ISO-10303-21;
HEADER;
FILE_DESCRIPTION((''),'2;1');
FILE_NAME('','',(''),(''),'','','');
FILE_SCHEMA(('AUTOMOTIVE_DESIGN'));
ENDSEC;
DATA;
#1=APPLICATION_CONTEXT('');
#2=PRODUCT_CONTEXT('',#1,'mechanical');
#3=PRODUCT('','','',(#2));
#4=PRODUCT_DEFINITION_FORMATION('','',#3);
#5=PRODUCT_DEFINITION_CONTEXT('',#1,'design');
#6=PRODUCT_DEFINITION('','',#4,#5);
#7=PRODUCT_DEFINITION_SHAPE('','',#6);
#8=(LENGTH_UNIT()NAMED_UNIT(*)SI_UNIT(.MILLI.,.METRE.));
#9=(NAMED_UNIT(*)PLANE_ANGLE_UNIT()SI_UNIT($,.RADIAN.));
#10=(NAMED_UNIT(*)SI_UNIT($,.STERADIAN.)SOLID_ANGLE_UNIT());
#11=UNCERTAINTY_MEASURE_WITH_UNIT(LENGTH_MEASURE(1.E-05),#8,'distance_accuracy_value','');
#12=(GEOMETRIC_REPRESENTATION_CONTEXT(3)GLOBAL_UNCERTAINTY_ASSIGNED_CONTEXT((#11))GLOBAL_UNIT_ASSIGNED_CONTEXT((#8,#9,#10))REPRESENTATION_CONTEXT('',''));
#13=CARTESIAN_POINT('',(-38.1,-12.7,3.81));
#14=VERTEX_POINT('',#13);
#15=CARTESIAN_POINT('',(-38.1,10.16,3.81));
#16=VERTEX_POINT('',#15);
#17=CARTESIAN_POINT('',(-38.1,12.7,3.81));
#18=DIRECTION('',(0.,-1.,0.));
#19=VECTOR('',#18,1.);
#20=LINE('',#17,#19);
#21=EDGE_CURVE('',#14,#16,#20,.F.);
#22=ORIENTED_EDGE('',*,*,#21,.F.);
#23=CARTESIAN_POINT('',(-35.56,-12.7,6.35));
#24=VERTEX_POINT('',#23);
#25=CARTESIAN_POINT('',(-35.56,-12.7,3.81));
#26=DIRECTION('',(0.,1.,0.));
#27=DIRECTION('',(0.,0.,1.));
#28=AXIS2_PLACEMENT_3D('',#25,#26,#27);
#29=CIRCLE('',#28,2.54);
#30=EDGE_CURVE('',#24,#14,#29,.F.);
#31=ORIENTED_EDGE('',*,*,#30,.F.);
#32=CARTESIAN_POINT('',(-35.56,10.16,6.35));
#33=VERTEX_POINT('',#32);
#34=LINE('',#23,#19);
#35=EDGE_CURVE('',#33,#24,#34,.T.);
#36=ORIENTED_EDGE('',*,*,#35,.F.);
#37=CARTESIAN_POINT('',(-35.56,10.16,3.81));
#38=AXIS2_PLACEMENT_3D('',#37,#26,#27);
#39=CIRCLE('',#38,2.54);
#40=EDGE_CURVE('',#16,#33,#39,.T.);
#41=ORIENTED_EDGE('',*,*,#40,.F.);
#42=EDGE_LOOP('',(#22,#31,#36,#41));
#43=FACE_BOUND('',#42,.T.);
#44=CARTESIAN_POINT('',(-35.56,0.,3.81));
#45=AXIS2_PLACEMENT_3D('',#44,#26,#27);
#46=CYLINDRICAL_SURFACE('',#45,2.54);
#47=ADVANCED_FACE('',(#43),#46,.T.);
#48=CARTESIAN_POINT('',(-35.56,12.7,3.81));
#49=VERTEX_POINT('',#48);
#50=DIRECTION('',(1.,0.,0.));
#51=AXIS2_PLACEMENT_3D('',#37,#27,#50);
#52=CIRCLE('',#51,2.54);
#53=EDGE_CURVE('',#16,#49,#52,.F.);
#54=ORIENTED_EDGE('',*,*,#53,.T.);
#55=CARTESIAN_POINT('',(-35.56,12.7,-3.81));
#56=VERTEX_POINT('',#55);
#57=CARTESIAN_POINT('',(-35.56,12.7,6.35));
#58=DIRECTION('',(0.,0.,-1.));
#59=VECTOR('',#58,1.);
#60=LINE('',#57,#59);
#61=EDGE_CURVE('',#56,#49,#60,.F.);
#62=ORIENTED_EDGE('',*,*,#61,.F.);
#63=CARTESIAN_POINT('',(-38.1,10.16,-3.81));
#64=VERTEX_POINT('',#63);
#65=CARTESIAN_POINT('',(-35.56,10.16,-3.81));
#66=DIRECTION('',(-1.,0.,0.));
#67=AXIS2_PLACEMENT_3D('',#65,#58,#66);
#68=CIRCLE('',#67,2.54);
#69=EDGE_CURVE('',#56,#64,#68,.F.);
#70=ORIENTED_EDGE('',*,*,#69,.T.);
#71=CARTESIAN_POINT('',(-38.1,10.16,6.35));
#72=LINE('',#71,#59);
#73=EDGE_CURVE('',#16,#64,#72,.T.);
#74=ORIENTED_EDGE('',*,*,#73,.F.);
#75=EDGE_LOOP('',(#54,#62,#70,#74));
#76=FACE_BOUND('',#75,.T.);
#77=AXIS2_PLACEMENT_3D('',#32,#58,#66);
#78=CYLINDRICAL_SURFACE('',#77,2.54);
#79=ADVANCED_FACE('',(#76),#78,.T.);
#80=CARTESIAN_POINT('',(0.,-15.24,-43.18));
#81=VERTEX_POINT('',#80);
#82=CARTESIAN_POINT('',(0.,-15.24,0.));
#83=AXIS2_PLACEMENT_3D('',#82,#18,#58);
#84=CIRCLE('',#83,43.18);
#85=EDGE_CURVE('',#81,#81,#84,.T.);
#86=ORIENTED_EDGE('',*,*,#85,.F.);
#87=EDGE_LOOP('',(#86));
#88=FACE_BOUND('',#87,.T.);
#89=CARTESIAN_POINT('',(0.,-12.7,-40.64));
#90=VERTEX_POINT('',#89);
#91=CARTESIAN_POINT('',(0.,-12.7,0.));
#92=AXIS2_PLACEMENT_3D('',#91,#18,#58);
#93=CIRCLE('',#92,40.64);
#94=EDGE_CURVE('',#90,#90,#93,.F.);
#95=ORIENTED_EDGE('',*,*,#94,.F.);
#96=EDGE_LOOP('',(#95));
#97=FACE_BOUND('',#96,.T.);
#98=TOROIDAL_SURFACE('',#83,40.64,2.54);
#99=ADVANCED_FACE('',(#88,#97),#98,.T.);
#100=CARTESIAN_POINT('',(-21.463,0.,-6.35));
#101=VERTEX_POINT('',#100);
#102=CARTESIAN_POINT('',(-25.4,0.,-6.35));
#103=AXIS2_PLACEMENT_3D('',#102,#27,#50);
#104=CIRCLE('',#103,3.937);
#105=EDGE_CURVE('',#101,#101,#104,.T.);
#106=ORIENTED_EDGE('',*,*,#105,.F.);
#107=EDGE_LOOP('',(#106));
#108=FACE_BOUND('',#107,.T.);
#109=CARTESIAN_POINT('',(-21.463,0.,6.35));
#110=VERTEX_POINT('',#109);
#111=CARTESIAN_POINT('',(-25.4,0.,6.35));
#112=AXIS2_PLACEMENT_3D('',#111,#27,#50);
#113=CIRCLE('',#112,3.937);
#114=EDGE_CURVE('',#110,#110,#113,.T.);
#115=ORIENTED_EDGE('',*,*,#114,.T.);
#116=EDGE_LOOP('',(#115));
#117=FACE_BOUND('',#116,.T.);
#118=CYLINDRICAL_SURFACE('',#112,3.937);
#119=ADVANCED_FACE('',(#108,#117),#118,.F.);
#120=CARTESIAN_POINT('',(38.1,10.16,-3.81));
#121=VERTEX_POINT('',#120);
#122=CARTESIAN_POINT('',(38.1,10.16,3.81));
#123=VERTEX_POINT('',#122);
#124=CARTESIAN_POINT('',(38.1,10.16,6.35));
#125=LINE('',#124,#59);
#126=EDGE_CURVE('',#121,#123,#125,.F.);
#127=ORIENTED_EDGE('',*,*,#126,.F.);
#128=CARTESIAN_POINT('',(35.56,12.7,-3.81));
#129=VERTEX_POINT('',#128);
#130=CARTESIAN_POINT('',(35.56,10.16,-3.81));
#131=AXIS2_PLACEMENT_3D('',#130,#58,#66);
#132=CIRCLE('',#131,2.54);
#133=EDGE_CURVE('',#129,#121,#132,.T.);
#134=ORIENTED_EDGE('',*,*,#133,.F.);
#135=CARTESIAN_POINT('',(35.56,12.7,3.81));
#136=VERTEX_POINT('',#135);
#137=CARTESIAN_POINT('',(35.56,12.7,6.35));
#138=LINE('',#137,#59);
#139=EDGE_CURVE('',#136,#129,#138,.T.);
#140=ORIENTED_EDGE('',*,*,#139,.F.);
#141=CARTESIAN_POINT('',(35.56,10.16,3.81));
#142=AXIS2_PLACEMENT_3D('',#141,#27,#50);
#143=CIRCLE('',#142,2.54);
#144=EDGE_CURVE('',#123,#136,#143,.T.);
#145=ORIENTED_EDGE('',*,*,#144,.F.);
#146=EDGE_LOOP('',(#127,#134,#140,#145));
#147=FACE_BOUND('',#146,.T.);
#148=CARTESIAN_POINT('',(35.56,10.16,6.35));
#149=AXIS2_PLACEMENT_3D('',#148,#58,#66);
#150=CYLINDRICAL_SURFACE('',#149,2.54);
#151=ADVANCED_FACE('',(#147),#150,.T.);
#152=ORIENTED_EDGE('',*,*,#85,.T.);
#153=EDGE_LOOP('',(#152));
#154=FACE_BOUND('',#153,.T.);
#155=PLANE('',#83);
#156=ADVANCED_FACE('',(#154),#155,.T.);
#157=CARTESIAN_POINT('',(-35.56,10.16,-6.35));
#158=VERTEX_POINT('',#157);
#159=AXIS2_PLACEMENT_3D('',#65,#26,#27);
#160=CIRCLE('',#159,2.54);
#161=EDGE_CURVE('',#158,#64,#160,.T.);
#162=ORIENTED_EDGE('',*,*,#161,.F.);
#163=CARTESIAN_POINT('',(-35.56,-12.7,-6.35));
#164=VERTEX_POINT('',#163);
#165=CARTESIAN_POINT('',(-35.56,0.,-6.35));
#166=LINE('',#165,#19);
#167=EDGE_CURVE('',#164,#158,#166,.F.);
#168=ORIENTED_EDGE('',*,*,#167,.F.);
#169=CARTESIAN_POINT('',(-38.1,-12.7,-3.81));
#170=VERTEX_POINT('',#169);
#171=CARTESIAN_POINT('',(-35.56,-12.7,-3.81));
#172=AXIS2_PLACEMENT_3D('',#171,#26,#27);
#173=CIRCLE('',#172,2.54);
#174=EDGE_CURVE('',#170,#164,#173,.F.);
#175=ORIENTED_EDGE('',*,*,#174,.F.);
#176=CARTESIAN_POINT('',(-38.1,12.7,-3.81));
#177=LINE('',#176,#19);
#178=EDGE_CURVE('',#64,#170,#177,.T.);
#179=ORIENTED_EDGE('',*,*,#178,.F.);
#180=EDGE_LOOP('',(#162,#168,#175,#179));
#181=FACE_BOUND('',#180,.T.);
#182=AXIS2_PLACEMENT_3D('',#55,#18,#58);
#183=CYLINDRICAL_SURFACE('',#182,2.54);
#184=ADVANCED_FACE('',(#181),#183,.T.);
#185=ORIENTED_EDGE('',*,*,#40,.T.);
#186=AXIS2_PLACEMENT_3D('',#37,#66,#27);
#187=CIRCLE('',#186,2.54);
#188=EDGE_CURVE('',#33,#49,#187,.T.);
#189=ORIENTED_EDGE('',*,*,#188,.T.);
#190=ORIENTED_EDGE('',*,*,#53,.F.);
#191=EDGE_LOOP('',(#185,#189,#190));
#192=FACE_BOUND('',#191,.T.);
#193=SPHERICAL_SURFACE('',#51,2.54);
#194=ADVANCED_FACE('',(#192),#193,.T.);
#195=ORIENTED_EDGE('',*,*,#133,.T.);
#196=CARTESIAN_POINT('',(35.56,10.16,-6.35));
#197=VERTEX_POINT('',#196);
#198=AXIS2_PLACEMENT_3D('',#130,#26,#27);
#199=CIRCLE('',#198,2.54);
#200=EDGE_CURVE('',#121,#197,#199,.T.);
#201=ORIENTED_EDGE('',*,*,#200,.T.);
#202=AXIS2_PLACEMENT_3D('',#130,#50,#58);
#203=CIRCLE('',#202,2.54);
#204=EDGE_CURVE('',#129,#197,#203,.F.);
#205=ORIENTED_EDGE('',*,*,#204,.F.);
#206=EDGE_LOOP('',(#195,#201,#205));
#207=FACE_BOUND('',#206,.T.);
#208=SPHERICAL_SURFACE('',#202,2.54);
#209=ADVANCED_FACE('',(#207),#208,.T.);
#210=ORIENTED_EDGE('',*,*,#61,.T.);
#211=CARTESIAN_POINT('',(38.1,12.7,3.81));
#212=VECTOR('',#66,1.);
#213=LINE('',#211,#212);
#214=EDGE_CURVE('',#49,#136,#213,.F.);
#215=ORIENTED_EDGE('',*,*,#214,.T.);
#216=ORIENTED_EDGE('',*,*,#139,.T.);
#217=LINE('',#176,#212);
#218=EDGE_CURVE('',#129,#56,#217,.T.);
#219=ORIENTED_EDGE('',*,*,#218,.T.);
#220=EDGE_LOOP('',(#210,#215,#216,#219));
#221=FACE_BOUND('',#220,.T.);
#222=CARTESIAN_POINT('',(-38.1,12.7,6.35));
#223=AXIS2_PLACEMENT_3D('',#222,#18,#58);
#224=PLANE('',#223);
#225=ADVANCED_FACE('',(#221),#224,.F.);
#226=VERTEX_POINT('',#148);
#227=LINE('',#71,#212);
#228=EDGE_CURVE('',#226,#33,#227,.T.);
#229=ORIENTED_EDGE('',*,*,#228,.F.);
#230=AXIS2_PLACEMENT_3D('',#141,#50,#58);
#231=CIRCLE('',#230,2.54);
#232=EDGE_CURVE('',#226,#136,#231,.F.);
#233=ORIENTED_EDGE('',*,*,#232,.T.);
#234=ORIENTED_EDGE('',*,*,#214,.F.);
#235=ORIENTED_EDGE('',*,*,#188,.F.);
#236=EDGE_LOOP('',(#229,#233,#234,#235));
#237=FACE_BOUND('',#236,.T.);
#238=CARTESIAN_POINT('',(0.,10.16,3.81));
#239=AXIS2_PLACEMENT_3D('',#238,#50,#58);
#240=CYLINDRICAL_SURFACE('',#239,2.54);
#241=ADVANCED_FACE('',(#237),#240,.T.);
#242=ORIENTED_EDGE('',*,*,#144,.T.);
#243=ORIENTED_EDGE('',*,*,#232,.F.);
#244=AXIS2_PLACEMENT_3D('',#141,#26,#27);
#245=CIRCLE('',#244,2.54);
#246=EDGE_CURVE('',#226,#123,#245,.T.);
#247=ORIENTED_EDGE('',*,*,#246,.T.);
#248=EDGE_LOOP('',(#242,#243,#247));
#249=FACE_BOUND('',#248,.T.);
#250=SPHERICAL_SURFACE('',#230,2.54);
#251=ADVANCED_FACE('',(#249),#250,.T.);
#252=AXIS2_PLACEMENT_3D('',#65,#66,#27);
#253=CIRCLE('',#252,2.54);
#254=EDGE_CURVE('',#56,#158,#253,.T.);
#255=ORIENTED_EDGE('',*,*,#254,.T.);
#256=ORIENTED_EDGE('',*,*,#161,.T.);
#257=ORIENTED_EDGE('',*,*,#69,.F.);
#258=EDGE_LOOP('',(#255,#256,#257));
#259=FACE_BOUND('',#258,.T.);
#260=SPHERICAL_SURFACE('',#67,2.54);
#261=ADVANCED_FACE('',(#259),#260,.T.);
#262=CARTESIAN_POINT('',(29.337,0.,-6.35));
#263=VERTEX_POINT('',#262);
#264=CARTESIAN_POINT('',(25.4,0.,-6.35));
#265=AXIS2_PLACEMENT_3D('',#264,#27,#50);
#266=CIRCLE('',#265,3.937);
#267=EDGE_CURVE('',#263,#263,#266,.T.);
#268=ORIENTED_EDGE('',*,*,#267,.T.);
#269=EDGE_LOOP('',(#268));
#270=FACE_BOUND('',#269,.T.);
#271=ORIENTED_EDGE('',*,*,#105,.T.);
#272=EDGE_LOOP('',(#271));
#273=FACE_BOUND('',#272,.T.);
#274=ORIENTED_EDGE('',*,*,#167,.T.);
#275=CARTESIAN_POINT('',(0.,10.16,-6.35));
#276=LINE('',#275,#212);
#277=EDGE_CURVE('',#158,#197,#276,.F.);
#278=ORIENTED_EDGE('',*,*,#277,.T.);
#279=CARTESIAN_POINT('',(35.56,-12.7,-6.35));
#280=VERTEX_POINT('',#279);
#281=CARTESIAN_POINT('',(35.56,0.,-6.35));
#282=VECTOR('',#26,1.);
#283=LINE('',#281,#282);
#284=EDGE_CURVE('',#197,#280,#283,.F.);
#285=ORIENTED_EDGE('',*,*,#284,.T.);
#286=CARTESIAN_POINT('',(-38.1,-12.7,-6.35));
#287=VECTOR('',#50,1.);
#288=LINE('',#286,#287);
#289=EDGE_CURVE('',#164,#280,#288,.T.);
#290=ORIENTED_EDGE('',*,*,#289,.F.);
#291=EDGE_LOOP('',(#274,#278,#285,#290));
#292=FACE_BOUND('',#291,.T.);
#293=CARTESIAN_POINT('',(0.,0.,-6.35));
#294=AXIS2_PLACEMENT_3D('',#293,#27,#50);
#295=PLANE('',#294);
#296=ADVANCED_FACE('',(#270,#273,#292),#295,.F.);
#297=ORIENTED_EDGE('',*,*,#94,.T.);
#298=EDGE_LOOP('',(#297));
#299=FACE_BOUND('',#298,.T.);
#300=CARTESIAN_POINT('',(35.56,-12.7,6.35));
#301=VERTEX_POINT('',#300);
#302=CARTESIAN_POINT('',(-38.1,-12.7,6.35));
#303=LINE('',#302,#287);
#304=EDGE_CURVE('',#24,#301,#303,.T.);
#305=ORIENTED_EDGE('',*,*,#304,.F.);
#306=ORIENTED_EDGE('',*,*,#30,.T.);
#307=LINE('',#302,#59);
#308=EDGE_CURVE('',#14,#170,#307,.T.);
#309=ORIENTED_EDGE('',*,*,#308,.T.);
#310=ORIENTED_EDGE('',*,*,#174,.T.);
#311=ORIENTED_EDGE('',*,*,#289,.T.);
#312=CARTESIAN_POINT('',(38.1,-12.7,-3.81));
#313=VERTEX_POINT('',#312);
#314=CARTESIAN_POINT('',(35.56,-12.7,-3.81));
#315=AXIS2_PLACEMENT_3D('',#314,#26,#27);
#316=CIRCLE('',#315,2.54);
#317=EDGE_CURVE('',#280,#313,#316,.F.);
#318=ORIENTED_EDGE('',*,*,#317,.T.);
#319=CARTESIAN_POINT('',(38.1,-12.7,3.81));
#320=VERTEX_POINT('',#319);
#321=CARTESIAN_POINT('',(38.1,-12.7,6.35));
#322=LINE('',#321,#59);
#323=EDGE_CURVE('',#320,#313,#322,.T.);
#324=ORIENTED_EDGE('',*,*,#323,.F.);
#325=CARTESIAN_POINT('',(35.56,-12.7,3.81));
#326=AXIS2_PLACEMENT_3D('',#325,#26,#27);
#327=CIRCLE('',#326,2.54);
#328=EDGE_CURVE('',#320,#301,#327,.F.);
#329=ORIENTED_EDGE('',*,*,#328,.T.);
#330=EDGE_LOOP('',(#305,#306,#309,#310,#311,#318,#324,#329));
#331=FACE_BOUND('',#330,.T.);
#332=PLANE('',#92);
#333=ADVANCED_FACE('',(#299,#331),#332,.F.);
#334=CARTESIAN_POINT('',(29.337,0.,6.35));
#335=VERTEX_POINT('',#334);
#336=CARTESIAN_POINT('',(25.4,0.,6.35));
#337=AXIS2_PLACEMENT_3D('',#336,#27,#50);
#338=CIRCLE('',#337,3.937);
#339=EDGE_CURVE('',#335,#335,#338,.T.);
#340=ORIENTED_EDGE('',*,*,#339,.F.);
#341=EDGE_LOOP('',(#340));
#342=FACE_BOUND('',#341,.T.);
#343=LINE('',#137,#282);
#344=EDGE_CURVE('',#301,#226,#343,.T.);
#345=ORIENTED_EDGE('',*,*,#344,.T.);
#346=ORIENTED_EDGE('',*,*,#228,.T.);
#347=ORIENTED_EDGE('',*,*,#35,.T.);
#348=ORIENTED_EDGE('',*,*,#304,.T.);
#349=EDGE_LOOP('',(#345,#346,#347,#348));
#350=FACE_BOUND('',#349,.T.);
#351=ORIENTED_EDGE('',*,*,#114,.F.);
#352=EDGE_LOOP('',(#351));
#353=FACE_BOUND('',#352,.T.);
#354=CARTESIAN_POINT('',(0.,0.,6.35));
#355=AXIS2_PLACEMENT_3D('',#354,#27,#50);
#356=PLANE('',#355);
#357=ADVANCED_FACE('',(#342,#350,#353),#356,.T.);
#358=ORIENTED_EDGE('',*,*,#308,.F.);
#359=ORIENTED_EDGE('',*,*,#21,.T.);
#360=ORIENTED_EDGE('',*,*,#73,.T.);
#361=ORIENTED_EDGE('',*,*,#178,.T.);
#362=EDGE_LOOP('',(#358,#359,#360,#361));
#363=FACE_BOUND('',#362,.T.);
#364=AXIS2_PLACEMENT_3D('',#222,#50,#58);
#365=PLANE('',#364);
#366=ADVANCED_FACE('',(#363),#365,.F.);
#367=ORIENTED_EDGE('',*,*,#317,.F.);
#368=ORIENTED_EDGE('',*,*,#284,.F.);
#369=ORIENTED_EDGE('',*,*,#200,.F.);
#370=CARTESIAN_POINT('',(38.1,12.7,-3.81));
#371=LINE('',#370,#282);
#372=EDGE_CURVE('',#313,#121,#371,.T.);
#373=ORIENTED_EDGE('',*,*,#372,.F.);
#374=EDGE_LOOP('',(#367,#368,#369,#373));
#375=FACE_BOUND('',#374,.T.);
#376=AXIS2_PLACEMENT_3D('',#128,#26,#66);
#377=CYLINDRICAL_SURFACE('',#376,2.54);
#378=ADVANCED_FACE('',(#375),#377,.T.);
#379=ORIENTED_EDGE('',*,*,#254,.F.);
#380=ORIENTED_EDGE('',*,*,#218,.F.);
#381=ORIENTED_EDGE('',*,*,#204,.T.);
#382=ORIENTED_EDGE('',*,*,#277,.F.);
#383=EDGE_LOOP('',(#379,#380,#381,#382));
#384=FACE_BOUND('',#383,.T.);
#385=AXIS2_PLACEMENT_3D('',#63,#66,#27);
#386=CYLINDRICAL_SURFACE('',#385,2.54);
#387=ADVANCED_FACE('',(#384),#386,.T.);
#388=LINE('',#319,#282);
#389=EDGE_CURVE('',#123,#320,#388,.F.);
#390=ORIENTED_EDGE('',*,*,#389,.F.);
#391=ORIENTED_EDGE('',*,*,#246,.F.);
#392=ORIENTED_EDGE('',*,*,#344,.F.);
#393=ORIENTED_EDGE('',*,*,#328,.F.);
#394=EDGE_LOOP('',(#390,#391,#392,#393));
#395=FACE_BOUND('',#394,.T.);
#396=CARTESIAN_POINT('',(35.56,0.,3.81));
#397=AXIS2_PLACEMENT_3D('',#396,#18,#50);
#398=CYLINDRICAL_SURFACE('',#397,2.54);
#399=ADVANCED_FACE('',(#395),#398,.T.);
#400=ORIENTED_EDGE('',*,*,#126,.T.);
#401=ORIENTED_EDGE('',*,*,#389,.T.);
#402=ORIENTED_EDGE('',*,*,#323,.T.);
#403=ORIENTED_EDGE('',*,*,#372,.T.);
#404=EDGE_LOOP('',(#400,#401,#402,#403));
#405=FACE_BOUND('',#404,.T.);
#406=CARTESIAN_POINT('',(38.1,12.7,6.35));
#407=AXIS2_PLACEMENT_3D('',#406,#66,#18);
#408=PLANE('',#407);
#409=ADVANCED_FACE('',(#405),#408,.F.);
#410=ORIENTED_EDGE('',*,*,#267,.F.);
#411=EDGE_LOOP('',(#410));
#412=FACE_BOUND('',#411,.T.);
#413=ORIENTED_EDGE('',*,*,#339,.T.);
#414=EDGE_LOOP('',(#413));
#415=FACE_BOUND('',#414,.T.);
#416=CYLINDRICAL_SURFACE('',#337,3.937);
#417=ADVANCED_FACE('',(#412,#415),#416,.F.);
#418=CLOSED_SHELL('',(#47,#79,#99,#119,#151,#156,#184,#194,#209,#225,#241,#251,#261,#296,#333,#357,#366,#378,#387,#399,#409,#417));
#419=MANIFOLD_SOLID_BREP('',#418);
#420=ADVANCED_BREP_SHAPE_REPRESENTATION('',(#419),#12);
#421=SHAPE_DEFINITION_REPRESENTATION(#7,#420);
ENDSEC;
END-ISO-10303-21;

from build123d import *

# Parameters (mm, degrees)
SKETCH1_W                      = 76.2
SKETCH1_H                      = 25.4
BOSS_EXTRUDE1_DEPTH            = 6.35
FILLET1_R                      = 2.54
F_97_0_31_DIAMETER_HOLE1_D     = 7.874
F_97_0_31_DIAMETER_HOLE1_DEPTH = 25.4
F_97_0_31_DIAMETER_HOLE1_TIP   = 2.365588257
SKETCH4_R                      = 43.18
BOSS_EXTRUDE2_DEPTH            = 2.54
FILLET2_R                      = 2.54


with BuildPart() as part:
    # Sketch1 → Boss-Extrude1 (new, symmetric)
    with BuildSketch(Plane.XY):
        Rectangle(SKETCH1_W, SKETCH1_H)
    extrude(amount=BOSS_EXTRUDE1_DEPTH, both=True)

    # Fillet1
    fillet1_edges = [part.edges().sort_by_distance(p)[0] for p in [
        (-38.1, 0, 6.35),
        (38.1, 0, 6.35),
        (-38.1, 0, -6.35),
        (0, 12.7, -6.35),
        (38.1, 0, -6.35),
        (-38.1, 12.7, 0),
        (38.1, 12.7, 0),
        (0, 12.7, 6.35),
    ]]
    fillet(fillet1_edges, radius=FILLET1_R)

    # #97 (0.31) Diameter Hole1
    with Locations(Plane.XY.offset(6.35)):
        with Locations((25.4, 0), (-25.4, 0)):
            Hole(F_97_0_31_DIAMETER_HOLE1_D / 2, depth=F_97_0_31_DIAMETER_HOLE1_DEPTH)
            with Locations((0, 0, -(F_97_0_31_DIAMETER_HOLE1_DEPTH + F_97_0_31_DIAMETER_HOLE1_TIP / 2))):  # 118° drill point
                Cone(0, F_97_0_31_DIAMETER_HOLE1_D / 2, F_97_0_31_DIAMETER_HOLE1_TIP, mode=Mode.SUBTRACT)

    # Sketch4 → Boss-Extrude2 (add)
    with BuildSketch(Plane.XZ.offset(12.7)):
        with Locations(Location((0, 0, 0), (0, 0, 270))):
            Circle(SKETCH4_R)
    extrude(amount=BOSS_EXTRUDE2_DEPTH)

    # Fillet2
    fillet2_edges = [part.edges().sort_by_distance(p)[0] for p in [
        (0, -12.7, 43.18),
    ]]
    fillet(fillet2_edges, radius=FILLET2_R - 0.0001)  # a hair under: the kernel refuses the full size


solid = part.part
